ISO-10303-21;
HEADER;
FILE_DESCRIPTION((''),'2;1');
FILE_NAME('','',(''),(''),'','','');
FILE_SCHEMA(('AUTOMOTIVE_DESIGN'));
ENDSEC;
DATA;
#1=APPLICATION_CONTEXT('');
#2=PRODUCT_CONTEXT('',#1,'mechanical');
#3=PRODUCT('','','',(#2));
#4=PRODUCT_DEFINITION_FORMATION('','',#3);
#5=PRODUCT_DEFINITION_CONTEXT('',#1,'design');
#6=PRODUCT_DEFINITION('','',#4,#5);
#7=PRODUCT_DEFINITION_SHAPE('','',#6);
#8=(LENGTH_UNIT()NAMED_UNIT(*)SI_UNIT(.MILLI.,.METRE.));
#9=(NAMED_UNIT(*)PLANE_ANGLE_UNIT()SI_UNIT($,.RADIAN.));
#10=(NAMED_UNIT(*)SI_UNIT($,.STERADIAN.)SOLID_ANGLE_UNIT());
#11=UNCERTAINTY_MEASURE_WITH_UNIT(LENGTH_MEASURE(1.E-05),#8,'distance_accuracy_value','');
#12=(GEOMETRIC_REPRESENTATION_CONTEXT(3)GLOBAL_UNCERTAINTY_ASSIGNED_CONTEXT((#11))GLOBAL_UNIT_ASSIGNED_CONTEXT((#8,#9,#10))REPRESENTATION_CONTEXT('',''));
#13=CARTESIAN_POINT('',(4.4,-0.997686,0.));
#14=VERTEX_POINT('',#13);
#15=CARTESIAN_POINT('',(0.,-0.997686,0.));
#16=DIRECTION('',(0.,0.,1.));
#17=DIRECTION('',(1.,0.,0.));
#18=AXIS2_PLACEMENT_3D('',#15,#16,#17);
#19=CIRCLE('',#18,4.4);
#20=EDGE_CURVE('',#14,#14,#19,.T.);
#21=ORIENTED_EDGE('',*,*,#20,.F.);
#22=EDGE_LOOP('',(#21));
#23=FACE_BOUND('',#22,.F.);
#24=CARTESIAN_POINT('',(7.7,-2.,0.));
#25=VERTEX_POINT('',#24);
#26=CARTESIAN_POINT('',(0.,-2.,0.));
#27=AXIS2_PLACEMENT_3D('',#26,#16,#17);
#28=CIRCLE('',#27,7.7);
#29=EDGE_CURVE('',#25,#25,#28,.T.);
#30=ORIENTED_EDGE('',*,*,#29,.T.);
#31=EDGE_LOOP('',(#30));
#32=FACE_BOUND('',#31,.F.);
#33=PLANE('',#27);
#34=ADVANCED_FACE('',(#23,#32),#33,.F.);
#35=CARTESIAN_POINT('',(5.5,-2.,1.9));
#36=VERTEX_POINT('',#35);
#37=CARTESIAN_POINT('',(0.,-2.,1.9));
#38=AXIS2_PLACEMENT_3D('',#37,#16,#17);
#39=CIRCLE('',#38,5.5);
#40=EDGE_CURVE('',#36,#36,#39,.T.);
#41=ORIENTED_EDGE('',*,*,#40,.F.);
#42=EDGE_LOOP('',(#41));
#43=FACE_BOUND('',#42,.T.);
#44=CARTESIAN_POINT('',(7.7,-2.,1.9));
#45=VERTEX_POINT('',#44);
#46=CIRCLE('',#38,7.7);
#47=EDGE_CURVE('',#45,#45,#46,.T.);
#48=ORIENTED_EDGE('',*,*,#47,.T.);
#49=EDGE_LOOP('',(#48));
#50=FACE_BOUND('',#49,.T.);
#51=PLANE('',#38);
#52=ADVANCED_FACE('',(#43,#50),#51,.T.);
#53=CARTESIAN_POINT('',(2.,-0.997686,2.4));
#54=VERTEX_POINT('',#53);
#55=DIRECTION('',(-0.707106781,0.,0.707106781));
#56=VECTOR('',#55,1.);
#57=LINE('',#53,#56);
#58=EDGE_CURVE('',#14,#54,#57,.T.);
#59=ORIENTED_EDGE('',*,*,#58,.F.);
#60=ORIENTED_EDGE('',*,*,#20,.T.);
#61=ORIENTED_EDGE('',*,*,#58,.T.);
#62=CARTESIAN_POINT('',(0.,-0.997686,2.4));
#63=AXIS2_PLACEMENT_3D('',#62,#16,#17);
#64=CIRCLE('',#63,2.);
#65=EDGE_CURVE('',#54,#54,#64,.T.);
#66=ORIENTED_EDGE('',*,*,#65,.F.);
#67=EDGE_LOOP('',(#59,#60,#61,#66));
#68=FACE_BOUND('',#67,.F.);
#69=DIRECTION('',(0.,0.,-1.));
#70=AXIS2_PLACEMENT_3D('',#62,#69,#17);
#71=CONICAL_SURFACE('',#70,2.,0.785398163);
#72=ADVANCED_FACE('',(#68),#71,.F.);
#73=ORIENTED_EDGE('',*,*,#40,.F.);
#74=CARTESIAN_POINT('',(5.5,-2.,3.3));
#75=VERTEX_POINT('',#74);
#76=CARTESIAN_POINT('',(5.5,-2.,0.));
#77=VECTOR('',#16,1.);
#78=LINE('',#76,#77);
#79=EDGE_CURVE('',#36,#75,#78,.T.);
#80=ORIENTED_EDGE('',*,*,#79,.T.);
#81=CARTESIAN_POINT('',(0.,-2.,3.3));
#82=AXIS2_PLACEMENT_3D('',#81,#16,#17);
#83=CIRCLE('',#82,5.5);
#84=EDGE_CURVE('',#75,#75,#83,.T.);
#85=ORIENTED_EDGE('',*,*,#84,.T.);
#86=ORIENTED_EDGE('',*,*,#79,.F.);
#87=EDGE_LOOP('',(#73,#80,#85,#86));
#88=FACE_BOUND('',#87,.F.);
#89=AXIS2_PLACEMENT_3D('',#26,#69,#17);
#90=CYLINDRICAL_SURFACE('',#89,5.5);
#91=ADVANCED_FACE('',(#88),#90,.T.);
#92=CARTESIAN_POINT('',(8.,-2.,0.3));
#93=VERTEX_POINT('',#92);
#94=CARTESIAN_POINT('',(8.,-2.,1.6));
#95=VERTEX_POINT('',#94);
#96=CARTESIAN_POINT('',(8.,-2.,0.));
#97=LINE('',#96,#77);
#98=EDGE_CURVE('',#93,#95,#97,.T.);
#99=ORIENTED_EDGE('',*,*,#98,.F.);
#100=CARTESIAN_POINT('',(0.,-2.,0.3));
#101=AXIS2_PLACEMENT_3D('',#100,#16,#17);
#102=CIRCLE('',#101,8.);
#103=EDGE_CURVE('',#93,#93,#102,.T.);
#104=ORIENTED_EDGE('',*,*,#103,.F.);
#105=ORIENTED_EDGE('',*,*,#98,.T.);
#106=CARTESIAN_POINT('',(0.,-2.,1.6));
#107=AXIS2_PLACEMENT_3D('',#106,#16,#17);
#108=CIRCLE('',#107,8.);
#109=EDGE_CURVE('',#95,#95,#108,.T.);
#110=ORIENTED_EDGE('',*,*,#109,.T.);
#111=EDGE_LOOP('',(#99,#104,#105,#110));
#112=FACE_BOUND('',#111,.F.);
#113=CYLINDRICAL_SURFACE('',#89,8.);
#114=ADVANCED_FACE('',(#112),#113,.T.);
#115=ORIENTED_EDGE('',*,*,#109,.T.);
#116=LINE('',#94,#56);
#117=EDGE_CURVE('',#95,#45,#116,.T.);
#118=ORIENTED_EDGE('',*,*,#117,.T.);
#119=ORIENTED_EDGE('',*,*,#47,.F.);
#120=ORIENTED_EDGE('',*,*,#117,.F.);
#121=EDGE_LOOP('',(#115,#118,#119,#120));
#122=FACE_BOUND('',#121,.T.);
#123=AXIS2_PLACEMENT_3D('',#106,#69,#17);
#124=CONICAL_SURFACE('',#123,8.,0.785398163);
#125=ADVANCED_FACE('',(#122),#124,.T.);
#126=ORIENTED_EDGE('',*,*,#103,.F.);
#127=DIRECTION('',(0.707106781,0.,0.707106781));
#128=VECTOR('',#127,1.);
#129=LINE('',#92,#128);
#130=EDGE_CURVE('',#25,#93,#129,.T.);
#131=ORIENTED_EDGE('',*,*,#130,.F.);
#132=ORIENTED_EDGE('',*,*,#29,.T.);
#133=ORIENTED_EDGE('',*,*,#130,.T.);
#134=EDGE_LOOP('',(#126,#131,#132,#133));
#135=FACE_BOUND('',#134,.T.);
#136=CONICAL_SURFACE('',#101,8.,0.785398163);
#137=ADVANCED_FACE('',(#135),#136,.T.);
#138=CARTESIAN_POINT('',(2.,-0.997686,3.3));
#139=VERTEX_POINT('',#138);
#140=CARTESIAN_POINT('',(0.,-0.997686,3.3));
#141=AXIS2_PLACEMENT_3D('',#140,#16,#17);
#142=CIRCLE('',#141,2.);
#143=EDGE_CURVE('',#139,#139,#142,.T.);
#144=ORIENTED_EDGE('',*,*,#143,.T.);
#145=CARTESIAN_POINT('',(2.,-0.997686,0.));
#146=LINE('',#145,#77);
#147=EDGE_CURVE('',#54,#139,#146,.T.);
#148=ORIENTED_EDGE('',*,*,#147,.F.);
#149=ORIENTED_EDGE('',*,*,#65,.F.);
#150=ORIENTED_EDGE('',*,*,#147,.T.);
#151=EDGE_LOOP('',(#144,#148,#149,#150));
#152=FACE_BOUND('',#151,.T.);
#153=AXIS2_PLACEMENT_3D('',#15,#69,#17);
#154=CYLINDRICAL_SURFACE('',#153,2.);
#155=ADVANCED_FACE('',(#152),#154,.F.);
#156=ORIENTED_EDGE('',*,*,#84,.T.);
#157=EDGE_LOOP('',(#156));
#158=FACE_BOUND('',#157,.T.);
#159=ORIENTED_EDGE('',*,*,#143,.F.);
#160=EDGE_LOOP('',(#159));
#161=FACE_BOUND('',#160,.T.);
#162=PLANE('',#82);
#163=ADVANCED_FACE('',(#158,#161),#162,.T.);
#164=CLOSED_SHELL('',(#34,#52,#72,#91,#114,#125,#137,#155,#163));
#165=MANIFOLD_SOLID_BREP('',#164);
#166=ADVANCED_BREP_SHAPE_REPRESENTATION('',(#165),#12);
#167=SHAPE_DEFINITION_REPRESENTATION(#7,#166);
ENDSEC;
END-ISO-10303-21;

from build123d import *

# Parameters (mm, degrees)
F0_R     = 5.5
F0_R_2   = 2
F1_DEPTH = 3.3
F0_R_3   = 8
F2_DEPTH = 1.9
F3_SIZE  = 2.4
F4_SIZE  = 0.3


# Not quite as in the source:
# - a feature names something its author has since deleted; it is built from what else it names


with BuildPart() as f1:
    # F0 (on Top) → F1 (new body)
    with BuildSketch(Plane.XY):
        with Locations((0, -2)):
            Circle(F0_R)
        with Locations((0, -0.9976860601)):
            Circle(F0_R_2, mode=Mode.SUBTRACT)
    extrude(amount=F1_DEPTH)

    # F0 (on Top) → F2 (join)
    with BuildSketch(Plane.XY):
        with Locations((0, -2)):
            Circle(F0_R_3)
        with Locations((0, -2)):
            Circle(F0_R, mode=Mode.SUBTRACT)
    extrude(amount=F2_DEPTH)

    # F3
    f3_edges = [f1.edges().sort_by_distance(p)[0] for p in [
        (-2, -0.997686, 0),
    ]]
    chamfer(f3_edges, length=F3_SIZE)

    # F4
    f4_edges = [f1.edges().sort_by_distance(p)[0] for p in [
        (-8, -2, 1.9),
        (-8, -2, 0),
    ]]
    chamfer(f4_edges, length=F4_SIZE)


solid = f1.part
